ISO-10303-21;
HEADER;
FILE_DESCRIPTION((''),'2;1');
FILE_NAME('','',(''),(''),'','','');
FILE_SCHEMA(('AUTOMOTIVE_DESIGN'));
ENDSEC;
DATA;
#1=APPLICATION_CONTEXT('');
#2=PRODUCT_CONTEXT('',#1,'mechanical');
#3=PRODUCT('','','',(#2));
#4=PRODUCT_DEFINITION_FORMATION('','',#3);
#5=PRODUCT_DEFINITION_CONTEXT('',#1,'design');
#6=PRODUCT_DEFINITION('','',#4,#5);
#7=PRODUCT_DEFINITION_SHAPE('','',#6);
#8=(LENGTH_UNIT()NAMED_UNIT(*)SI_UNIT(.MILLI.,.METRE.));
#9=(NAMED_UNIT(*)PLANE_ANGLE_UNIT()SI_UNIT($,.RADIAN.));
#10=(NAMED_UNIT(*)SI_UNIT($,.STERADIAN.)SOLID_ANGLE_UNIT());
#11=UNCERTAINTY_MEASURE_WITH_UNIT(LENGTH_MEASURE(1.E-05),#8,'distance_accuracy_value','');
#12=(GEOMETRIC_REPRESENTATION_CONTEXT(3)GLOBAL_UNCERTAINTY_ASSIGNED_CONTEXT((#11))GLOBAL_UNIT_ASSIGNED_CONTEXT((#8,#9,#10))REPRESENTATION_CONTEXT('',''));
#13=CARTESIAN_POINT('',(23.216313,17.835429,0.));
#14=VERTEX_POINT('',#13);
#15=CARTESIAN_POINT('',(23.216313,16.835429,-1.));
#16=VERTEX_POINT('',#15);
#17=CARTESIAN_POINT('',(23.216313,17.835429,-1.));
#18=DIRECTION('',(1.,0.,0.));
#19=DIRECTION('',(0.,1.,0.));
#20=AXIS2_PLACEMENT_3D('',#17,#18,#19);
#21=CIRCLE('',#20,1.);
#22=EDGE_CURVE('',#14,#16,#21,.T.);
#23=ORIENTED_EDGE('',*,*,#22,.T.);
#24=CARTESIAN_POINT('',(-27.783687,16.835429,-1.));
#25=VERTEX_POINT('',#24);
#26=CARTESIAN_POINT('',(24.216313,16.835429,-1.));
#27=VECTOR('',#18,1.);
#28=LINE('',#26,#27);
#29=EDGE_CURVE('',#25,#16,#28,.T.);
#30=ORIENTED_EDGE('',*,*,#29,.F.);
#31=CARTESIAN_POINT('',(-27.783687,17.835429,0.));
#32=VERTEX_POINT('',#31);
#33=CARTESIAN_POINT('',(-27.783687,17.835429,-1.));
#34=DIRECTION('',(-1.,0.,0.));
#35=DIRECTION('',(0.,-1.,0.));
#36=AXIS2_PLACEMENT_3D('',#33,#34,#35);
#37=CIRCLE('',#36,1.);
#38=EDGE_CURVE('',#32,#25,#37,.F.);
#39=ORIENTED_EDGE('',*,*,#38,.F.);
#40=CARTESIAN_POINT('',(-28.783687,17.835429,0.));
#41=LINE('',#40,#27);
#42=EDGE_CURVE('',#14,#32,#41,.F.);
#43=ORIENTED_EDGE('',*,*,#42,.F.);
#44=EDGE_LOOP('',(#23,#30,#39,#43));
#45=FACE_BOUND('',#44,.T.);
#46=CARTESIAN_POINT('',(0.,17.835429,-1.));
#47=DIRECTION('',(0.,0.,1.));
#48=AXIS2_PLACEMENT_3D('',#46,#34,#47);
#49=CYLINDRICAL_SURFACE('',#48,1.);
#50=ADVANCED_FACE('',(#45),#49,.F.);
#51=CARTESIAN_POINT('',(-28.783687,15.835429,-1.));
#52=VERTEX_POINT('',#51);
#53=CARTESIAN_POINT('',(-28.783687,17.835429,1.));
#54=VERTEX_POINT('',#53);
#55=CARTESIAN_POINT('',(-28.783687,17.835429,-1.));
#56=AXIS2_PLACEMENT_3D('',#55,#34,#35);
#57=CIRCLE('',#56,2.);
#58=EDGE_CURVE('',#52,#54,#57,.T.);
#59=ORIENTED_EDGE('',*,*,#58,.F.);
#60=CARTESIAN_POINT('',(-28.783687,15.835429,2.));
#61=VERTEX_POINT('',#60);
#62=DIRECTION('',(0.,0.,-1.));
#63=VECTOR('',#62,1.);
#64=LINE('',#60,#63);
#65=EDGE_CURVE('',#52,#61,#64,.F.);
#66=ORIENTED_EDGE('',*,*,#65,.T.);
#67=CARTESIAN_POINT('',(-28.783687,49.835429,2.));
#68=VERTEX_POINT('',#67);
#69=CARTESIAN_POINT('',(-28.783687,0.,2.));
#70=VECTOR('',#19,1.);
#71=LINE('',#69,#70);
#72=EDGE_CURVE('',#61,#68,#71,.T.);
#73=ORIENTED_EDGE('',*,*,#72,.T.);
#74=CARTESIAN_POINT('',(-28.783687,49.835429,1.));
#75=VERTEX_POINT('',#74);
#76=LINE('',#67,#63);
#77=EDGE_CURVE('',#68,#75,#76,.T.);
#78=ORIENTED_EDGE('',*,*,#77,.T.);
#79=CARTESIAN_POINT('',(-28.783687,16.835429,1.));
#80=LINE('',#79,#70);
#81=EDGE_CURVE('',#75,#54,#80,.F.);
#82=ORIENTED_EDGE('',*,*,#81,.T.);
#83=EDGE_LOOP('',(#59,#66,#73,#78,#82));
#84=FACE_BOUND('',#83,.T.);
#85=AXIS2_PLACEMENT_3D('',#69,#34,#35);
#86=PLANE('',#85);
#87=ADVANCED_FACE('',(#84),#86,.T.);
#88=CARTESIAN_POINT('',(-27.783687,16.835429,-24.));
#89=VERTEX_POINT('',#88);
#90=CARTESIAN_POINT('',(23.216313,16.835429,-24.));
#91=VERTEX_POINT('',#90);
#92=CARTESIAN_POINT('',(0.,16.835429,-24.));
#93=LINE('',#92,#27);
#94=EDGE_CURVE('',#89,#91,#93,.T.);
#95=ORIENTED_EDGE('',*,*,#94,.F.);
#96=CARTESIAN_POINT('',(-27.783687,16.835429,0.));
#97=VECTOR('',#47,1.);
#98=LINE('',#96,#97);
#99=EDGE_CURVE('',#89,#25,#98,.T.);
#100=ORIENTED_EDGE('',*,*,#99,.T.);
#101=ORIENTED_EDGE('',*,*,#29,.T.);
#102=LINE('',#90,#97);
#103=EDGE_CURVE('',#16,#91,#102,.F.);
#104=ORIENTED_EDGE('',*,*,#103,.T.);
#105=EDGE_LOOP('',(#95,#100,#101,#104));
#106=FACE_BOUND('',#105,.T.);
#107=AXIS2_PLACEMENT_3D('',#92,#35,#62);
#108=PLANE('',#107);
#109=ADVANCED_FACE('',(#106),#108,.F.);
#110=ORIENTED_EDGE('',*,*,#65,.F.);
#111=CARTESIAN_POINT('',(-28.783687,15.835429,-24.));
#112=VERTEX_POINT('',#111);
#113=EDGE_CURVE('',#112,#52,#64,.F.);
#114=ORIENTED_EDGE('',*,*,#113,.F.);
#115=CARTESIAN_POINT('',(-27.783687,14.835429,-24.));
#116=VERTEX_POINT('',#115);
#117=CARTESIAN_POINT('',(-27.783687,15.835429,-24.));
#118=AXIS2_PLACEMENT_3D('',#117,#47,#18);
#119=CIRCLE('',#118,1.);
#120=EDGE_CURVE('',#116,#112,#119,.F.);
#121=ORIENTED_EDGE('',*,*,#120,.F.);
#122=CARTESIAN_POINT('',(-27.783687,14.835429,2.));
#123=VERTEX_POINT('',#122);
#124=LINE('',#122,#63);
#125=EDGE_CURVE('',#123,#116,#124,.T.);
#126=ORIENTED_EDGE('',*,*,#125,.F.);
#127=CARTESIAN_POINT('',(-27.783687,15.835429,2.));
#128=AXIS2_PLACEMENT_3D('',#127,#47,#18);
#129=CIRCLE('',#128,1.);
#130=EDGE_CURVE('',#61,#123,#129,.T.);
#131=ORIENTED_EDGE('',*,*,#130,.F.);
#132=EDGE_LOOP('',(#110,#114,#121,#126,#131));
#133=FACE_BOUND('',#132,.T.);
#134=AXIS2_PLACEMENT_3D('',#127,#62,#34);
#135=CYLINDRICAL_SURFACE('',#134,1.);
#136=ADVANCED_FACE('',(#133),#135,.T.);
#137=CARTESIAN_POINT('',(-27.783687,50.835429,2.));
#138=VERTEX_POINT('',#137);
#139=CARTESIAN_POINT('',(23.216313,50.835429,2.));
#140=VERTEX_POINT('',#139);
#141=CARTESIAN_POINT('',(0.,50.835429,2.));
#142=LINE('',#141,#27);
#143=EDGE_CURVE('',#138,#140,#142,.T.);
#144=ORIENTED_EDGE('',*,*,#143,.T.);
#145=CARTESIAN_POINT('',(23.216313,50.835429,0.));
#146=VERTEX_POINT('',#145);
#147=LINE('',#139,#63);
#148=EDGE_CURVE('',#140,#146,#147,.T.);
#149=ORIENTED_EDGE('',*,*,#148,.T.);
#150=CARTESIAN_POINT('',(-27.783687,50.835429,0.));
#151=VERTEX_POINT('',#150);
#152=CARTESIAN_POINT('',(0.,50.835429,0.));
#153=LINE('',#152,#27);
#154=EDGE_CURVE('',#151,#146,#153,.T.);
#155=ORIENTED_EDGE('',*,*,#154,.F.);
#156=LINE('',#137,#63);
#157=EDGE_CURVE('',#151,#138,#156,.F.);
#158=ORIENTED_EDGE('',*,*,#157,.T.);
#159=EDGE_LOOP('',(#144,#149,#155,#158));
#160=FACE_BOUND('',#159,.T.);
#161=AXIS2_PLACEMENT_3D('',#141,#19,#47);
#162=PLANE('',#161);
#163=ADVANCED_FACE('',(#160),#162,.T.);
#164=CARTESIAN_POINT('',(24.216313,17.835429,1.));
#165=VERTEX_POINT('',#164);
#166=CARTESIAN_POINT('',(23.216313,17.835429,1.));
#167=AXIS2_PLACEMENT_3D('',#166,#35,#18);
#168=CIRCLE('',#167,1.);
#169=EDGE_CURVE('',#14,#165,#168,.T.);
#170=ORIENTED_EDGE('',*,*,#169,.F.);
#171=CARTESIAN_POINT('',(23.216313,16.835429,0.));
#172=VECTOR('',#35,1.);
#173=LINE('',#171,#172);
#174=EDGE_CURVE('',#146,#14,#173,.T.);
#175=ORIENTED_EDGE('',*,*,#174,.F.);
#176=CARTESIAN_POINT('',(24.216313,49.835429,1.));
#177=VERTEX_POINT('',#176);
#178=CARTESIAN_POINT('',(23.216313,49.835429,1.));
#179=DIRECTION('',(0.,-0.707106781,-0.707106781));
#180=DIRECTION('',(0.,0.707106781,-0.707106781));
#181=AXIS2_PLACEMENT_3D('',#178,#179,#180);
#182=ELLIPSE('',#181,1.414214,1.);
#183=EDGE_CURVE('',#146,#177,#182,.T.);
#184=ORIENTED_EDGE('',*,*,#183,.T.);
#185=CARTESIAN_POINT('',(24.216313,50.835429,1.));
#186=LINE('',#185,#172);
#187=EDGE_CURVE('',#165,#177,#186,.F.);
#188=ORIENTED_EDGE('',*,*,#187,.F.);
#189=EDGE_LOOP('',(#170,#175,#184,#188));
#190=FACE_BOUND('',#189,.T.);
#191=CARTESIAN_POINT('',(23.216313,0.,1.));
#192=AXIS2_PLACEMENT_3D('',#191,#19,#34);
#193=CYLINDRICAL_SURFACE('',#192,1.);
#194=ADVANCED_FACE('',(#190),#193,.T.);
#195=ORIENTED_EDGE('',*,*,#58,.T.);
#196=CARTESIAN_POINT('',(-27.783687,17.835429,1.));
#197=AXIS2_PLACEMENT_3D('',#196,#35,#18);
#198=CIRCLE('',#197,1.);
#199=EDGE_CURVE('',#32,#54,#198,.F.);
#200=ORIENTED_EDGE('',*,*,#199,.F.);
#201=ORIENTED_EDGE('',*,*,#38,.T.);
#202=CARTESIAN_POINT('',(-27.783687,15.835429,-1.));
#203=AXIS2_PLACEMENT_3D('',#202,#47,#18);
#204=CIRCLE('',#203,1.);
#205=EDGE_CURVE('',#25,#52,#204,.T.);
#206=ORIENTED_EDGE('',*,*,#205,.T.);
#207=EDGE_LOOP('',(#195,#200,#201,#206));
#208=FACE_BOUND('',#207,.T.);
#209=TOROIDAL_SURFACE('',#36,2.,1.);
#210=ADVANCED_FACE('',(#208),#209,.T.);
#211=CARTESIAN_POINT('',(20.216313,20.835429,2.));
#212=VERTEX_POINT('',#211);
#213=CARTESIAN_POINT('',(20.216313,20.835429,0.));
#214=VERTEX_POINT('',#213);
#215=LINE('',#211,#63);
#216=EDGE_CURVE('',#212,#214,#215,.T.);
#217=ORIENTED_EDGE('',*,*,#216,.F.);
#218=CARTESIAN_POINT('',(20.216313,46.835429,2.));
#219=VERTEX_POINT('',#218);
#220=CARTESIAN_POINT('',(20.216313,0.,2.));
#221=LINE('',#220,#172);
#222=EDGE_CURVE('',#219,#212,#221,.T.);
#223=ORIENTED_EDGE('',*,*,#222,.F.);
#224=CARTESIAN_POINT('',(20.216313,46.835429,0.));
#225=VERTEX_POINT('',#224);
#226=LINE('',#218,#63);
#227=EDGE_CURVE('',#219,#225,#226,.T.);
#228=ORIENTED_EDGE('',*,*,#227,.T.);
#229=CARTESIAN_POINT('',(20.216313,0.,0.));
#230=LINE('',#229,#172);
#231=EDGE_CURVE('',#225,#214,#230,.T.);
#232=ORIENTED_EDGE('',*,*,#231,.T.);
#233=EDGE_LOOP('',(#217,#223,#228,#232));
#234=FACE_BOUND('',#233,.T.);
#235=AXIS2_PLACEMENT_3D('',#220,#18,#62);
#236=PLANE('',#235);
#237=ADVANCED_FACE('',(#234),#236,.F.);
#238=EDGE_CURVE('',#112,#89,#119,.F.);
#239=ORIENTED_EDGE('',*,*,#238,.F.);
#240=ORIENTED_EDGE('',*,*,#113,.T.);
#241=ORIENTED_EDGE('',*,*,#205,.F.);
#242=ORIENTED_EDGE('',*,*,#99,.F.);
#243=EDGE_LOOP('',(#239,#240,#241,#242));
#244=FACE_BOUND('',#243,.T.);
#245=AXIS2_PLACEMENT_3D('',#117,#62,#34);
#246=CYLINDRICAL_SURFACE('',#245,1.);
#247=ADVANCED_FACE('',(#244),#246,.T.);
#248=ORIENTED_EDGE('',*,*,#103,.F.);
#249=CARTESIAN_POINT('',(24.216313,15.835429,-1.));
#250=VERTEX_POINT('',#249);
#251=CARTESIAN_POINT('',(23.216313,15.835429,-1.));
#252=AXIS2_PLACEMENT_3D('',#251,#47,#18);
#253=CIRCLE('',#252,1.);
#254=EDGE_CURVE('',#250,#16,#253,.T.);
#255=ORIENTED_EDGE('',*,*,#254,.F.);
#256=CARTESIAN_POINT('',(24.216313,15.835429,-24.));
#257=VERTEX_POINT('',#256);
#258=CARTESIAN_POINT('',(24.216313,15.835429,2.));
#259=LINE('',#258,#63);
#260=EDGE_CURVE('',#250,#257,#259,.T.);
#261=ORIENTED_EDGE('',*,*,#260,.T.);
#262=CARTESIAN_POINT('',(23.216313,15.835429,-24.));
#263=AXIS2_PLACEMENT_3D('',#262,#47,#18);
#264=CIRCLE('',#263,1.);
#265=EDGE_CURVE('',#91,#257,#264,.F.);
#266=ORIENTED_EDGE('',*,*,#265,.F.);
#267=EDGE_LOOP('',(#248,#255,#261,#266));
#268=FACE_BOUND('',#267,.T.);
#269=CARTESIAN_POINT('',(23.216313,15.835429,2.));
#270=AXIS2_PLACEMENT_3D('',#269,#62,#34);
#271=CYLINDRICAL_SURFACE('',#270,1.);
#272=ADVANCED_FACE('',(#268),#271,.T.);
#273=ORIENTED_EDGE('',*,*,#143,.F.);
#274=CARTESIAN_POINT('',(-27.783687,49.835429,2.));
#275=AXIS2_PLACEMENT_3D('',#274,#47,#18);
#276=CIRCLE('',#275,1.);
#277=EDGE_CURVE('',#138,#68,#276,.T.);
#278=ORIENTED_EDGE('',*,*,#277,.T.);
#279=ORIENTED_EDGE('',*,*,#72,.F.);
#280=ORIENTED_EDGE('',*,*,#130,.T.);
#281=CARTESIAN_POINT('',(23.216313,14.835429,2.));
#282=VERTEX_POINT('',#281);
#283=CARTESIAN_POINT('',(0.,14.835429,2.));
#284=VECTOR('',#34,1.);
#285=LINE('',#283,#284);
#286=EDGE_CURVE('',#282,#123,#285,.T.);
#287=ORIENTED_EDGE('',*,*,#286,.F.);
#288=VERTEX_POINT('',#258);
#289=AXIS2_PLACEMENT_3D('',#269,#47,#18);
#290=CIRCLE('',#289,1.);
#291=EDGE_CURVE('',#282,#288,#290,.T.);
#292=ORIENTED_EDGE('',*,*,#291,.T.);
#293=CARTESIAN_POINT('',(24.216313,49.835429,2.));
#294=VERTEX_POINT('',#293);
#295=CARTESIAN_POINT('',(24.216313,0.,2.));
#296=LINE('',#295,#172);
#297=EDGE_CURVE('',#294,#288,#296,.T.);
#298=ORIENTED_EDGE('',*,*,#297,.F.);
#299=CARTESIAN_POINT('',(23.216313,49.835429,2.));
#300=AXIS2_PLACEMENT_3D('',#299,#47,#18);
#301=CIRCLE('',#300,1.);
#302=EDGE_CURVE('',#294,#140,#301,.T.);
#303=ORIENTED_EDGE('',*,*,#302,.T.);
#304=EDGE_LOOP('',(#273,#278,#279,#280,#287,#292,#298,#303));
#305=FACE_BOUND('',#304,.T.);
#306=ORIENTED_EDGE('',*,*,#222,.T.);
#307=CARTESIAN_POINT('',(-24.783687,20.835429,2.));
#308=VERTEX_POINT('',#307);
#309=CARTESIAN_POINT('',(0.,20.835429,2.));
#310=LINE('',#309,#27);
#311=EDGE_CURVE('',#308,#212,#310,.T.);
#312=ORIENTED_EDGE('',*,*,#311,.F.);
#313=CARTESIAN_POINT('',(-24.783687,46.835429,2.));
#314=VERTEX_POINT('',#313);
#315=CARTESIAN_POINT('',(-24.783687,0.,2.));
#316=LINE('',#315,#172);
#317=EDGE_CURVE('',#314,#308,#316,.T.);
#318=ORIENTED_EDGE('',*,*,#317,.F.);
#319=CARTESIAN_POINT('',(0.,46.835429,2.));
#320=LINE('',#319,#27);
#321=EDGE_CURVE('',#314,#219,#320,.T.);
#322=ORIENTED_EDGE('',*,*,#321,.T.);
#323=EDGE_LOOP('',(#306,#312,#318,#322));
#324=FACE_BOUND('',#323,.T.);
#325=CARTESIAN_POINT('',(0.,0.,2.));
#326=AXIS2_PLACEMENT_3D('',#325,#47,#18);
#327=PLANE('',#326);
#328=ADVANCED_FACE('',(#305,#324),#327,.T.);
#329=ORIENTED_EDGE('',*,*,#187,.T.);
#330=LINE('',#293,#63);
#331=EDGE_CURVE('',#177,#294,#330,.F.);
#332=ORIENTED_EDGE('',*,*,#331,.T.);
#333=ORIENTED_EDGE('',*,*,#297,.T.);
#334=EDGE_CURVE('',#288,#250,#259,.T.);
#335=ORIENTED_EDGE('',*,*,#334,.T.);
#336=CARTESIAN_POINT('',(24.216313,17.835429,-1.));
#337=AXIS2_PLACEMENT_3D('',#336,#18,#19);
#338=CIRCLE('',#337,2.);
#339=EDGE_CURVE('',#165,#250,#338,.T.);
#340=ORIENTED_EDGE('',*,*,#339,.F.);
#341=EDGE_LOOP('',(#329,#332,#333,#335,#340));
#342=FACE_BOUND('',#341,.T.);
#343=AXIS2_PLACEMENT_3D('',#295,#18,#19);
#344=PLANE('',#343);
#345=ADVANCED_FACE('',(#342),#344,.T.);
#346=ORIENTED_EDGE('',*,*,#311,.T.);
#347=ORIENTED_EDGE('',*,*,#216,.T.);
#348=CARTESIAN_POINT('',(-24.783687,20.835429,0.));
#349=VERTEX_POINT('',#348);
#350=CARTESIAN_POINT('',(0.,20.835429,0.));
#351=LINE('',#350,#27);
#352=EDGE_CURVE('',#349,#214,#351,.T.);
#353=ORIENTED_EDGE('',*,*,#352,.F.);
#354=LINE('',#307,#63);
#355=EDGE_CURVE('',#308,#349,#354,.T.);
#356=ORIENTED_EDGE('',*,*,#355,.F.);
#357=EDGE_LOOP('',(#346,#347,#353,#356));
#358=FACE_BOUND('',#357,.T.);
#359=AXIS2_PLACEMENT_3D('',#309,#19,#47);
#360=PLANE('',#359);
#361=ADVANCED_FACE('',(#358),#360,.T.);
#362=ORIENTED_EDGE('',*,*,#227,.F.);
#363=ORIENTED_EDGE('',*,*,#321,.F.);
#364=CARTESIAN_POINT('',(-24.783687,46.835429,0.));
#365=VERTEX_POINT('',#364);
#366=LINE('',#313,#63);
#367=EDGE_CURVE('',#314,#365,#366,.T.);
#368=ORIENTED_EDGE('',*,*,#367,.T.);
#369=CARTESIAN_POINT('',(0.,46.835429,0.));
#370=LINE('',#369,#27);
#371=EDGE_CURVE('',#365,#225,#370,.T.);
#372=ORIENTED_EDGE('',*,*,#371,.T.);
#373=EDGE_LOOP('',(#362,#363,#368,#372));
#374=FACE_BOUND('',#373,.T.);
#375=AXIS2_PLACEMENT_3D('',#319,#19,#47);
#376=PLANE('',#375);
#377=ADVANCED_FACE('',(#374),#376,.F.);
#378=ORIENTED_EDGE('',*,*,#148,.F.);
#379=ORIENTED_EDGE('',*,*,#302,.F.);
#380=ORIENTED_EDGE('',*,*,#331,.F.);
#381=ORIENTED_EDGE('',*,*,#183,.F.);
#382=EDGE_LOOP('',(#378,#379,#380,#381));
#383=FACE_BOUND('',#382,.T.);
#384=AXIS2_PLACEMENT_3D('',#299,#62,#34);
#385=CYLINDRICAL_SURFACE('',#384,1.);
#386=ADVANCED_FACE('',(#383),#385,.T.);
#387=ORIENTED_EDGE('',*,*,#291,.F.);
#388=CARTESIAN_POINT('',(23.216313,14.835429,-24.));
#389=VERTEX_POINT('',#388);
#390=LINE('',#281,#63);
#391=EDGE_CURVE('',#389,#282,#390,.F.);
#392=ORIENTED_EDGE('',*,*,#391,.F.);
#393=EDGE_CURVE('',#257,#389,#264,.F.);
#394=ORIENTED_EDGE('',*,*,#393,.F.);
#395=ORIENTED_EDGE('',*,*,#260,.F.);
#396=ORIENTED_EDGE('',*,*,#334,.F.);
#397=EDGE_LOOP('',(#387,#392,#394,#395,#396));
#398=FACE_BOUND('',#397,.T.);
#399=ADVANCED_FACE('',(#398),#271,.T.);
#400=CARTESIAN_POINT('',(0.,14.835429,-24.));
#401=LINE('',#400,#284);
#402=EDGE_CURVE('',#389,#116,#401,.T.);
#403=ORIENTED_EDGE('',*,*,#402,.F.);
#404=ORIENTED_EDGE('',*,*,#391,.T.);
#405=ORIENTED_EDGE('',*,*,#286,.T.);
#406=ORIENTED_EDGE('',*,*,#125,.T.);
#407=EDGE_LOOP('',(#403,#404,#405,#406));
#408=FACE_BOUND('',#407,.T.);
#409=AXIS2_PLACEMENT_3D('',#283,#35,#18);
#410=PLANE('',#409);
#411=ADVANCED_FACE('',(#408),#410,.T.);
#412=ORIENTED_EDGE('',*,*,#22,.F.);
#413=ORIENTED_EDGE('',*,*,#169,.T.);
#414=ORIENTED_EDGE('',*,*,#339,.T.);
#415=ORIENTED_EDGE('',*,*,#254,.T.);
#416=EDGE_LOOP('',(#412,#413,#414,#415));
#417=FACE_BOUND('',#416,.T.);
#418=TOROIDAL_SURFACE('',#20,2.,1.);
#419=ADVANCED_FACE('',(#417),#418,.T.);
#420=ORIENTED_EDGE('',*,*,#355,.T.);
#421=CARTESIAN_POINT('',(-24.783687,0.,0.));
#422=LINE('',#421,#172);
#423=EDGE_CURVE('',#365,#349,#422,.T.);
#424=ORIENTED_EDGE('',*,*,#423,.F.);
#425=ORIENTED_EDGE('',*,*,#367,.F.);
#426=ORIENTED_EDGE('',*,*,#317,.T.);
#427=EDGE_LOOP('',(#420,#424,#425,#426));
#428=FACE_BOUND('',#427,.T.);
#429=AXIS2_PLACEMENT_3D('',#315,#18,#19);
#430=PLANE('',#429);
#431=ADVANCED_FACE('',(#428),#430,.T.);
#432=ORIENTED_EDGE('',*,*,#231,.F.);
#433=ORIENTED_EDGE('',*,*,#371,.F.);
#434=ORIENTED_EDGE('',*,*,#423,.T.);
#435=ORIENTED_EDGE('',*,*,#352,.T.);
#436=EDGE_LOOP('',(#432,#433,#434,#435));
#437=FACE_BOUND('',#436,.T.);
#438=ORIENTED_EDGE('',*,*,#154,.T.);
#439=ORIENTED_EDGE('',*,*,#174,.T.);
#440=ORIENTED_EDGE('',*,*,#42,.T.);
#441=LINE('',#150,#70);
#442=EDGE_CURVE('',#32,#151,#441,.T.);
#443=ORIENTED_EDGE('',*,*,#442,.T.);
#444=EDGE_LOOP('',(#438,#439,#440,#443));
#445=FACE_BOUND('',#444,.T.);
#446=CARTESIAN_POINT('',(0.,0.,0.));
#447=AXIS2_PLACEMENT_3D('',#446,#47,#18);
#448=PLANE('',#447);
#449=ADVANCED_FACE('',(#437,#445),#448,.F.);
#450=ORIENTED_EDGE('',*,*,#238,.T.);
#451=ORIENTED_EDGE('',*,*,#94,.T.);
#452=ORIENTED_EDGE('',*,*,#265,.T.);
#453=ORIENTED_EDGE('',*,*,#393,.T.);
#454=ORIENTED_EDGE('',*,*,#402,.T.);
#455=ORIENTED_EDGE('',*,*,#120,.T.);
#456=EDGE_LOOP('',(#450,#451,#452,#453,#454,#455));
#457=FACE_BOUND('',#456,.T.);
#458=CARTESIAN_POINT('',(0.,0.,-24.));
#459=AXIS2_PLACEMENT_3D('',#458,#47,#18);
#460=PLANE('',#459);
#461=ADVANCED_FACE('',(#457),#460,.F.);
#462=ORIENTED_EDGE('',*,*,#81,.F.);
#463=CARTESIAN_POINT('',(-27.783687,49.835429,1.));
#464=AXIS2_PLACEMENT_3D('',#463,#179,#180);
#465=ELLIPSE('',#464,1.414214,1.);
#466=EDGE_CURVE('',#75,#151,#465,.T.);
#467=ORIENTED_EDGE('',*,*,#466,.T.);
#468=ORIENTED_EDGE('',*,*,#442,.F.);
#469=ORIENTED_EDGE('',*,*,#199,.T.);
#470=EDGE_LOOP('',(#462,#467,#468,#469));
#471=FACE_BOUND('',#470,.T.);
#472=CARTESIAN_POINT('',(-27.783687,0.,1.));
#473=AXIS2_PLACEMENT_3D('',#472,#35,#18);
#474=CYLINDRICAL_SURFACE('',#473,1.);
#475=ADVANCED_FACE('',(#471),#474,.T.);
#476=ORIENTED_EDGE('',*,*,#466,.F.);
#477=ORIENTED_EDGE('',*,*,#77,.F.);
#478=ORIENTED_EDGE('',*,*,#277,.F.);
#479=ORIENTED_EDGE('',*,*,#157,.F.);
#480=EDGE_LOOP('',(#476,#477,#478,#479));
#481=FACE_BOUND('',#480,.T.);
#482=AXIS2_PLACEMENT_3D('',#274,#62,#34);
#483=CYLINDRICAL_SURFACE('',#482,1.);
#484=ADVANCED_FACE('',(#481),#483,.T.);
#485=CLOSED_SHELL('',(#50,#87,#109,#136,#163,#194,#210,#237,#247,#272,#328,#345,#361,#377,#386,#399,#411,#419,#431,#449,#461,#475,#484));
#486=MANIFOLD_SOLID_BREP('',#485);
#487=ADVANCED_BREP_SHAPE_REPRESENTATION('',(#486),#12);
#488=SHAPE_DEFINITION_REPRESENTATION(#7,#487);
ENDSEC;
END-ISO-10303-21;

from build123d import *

# Parameters (mm, degrees)
SKETCH1_W           = 53
SKETCH1_H           = 2
SKETCH1_H_2         = 34
SKETCH1_W_2         = 45
SKETCH1_H_3         = 26
BOSS_EXTRUDE1_DEPTH = 2
SKETCH1_5_W         = 53
SKETCH1_5_H         = 2
BOSS_EXTRUDE4_DEPTH = 24
FILLET2_R           = 1


with BuildPart() as part:
    # Sketch1 → Boss-Extrude1 (new body)
    # profile 1 of 2: a face of its own
    with BuildSketch(Plane.XY):
        with Locations((-2.283686935, 15.83542926)):
            Rectangle(SKETCH1_W, SKETCH1_H)
    # profile 2 of 2: a face of its own
    with BuildSketch(Plane.XY):
        with Locations((-2.283686935, 33.83542926)):
            Rectangle(SKETCH1_W, SKETCH1_H_2)
        with Locations((-2.283686935, 33.83542926)):
            Rectangle(SKETCH1_W_2, SKETCH1_H_3, mode=Mode.SUBTRACT)
    extrude(amount=BOSS_EXTRUDE1_DEPTH)

    # Sketch1<5> → Boss-Extrude4 (add)
    with BuildSketch(Plane.XY):
        with Locations((-2.283686935, 15.83542926)):
            Rectangle(SKETCH1_5_W, SKETCH1_5_H)
    extrude(amount=-BOSS_EXTRUDE4_DEPTH)

    # Fillet2
    fillet2_edges = [part.edges().sort_by_distance(p)[0] for p in [
        (-28.783686935, 33.83542926, 0),
        (24.216313065, 33.83542926, 0),
        (-2.283686935, 16.83542926, 0),
        (-28.783686935, 16.83542926, -12),
        (24.216313065, 16.83542926, -12),
        (24.216313065, 50.83542926, 1),
        (24.216313065, 14.83542926, -11),
        (-28.783686935, 50.83542926, 1),
        (-28.783686935, 14.83542926, -11),
    ]]
    fillet(fillet2_edges, radius=FILLET2_R - 0.0001)  # a hair under: the kernel refuses the full size


solid = part.part
